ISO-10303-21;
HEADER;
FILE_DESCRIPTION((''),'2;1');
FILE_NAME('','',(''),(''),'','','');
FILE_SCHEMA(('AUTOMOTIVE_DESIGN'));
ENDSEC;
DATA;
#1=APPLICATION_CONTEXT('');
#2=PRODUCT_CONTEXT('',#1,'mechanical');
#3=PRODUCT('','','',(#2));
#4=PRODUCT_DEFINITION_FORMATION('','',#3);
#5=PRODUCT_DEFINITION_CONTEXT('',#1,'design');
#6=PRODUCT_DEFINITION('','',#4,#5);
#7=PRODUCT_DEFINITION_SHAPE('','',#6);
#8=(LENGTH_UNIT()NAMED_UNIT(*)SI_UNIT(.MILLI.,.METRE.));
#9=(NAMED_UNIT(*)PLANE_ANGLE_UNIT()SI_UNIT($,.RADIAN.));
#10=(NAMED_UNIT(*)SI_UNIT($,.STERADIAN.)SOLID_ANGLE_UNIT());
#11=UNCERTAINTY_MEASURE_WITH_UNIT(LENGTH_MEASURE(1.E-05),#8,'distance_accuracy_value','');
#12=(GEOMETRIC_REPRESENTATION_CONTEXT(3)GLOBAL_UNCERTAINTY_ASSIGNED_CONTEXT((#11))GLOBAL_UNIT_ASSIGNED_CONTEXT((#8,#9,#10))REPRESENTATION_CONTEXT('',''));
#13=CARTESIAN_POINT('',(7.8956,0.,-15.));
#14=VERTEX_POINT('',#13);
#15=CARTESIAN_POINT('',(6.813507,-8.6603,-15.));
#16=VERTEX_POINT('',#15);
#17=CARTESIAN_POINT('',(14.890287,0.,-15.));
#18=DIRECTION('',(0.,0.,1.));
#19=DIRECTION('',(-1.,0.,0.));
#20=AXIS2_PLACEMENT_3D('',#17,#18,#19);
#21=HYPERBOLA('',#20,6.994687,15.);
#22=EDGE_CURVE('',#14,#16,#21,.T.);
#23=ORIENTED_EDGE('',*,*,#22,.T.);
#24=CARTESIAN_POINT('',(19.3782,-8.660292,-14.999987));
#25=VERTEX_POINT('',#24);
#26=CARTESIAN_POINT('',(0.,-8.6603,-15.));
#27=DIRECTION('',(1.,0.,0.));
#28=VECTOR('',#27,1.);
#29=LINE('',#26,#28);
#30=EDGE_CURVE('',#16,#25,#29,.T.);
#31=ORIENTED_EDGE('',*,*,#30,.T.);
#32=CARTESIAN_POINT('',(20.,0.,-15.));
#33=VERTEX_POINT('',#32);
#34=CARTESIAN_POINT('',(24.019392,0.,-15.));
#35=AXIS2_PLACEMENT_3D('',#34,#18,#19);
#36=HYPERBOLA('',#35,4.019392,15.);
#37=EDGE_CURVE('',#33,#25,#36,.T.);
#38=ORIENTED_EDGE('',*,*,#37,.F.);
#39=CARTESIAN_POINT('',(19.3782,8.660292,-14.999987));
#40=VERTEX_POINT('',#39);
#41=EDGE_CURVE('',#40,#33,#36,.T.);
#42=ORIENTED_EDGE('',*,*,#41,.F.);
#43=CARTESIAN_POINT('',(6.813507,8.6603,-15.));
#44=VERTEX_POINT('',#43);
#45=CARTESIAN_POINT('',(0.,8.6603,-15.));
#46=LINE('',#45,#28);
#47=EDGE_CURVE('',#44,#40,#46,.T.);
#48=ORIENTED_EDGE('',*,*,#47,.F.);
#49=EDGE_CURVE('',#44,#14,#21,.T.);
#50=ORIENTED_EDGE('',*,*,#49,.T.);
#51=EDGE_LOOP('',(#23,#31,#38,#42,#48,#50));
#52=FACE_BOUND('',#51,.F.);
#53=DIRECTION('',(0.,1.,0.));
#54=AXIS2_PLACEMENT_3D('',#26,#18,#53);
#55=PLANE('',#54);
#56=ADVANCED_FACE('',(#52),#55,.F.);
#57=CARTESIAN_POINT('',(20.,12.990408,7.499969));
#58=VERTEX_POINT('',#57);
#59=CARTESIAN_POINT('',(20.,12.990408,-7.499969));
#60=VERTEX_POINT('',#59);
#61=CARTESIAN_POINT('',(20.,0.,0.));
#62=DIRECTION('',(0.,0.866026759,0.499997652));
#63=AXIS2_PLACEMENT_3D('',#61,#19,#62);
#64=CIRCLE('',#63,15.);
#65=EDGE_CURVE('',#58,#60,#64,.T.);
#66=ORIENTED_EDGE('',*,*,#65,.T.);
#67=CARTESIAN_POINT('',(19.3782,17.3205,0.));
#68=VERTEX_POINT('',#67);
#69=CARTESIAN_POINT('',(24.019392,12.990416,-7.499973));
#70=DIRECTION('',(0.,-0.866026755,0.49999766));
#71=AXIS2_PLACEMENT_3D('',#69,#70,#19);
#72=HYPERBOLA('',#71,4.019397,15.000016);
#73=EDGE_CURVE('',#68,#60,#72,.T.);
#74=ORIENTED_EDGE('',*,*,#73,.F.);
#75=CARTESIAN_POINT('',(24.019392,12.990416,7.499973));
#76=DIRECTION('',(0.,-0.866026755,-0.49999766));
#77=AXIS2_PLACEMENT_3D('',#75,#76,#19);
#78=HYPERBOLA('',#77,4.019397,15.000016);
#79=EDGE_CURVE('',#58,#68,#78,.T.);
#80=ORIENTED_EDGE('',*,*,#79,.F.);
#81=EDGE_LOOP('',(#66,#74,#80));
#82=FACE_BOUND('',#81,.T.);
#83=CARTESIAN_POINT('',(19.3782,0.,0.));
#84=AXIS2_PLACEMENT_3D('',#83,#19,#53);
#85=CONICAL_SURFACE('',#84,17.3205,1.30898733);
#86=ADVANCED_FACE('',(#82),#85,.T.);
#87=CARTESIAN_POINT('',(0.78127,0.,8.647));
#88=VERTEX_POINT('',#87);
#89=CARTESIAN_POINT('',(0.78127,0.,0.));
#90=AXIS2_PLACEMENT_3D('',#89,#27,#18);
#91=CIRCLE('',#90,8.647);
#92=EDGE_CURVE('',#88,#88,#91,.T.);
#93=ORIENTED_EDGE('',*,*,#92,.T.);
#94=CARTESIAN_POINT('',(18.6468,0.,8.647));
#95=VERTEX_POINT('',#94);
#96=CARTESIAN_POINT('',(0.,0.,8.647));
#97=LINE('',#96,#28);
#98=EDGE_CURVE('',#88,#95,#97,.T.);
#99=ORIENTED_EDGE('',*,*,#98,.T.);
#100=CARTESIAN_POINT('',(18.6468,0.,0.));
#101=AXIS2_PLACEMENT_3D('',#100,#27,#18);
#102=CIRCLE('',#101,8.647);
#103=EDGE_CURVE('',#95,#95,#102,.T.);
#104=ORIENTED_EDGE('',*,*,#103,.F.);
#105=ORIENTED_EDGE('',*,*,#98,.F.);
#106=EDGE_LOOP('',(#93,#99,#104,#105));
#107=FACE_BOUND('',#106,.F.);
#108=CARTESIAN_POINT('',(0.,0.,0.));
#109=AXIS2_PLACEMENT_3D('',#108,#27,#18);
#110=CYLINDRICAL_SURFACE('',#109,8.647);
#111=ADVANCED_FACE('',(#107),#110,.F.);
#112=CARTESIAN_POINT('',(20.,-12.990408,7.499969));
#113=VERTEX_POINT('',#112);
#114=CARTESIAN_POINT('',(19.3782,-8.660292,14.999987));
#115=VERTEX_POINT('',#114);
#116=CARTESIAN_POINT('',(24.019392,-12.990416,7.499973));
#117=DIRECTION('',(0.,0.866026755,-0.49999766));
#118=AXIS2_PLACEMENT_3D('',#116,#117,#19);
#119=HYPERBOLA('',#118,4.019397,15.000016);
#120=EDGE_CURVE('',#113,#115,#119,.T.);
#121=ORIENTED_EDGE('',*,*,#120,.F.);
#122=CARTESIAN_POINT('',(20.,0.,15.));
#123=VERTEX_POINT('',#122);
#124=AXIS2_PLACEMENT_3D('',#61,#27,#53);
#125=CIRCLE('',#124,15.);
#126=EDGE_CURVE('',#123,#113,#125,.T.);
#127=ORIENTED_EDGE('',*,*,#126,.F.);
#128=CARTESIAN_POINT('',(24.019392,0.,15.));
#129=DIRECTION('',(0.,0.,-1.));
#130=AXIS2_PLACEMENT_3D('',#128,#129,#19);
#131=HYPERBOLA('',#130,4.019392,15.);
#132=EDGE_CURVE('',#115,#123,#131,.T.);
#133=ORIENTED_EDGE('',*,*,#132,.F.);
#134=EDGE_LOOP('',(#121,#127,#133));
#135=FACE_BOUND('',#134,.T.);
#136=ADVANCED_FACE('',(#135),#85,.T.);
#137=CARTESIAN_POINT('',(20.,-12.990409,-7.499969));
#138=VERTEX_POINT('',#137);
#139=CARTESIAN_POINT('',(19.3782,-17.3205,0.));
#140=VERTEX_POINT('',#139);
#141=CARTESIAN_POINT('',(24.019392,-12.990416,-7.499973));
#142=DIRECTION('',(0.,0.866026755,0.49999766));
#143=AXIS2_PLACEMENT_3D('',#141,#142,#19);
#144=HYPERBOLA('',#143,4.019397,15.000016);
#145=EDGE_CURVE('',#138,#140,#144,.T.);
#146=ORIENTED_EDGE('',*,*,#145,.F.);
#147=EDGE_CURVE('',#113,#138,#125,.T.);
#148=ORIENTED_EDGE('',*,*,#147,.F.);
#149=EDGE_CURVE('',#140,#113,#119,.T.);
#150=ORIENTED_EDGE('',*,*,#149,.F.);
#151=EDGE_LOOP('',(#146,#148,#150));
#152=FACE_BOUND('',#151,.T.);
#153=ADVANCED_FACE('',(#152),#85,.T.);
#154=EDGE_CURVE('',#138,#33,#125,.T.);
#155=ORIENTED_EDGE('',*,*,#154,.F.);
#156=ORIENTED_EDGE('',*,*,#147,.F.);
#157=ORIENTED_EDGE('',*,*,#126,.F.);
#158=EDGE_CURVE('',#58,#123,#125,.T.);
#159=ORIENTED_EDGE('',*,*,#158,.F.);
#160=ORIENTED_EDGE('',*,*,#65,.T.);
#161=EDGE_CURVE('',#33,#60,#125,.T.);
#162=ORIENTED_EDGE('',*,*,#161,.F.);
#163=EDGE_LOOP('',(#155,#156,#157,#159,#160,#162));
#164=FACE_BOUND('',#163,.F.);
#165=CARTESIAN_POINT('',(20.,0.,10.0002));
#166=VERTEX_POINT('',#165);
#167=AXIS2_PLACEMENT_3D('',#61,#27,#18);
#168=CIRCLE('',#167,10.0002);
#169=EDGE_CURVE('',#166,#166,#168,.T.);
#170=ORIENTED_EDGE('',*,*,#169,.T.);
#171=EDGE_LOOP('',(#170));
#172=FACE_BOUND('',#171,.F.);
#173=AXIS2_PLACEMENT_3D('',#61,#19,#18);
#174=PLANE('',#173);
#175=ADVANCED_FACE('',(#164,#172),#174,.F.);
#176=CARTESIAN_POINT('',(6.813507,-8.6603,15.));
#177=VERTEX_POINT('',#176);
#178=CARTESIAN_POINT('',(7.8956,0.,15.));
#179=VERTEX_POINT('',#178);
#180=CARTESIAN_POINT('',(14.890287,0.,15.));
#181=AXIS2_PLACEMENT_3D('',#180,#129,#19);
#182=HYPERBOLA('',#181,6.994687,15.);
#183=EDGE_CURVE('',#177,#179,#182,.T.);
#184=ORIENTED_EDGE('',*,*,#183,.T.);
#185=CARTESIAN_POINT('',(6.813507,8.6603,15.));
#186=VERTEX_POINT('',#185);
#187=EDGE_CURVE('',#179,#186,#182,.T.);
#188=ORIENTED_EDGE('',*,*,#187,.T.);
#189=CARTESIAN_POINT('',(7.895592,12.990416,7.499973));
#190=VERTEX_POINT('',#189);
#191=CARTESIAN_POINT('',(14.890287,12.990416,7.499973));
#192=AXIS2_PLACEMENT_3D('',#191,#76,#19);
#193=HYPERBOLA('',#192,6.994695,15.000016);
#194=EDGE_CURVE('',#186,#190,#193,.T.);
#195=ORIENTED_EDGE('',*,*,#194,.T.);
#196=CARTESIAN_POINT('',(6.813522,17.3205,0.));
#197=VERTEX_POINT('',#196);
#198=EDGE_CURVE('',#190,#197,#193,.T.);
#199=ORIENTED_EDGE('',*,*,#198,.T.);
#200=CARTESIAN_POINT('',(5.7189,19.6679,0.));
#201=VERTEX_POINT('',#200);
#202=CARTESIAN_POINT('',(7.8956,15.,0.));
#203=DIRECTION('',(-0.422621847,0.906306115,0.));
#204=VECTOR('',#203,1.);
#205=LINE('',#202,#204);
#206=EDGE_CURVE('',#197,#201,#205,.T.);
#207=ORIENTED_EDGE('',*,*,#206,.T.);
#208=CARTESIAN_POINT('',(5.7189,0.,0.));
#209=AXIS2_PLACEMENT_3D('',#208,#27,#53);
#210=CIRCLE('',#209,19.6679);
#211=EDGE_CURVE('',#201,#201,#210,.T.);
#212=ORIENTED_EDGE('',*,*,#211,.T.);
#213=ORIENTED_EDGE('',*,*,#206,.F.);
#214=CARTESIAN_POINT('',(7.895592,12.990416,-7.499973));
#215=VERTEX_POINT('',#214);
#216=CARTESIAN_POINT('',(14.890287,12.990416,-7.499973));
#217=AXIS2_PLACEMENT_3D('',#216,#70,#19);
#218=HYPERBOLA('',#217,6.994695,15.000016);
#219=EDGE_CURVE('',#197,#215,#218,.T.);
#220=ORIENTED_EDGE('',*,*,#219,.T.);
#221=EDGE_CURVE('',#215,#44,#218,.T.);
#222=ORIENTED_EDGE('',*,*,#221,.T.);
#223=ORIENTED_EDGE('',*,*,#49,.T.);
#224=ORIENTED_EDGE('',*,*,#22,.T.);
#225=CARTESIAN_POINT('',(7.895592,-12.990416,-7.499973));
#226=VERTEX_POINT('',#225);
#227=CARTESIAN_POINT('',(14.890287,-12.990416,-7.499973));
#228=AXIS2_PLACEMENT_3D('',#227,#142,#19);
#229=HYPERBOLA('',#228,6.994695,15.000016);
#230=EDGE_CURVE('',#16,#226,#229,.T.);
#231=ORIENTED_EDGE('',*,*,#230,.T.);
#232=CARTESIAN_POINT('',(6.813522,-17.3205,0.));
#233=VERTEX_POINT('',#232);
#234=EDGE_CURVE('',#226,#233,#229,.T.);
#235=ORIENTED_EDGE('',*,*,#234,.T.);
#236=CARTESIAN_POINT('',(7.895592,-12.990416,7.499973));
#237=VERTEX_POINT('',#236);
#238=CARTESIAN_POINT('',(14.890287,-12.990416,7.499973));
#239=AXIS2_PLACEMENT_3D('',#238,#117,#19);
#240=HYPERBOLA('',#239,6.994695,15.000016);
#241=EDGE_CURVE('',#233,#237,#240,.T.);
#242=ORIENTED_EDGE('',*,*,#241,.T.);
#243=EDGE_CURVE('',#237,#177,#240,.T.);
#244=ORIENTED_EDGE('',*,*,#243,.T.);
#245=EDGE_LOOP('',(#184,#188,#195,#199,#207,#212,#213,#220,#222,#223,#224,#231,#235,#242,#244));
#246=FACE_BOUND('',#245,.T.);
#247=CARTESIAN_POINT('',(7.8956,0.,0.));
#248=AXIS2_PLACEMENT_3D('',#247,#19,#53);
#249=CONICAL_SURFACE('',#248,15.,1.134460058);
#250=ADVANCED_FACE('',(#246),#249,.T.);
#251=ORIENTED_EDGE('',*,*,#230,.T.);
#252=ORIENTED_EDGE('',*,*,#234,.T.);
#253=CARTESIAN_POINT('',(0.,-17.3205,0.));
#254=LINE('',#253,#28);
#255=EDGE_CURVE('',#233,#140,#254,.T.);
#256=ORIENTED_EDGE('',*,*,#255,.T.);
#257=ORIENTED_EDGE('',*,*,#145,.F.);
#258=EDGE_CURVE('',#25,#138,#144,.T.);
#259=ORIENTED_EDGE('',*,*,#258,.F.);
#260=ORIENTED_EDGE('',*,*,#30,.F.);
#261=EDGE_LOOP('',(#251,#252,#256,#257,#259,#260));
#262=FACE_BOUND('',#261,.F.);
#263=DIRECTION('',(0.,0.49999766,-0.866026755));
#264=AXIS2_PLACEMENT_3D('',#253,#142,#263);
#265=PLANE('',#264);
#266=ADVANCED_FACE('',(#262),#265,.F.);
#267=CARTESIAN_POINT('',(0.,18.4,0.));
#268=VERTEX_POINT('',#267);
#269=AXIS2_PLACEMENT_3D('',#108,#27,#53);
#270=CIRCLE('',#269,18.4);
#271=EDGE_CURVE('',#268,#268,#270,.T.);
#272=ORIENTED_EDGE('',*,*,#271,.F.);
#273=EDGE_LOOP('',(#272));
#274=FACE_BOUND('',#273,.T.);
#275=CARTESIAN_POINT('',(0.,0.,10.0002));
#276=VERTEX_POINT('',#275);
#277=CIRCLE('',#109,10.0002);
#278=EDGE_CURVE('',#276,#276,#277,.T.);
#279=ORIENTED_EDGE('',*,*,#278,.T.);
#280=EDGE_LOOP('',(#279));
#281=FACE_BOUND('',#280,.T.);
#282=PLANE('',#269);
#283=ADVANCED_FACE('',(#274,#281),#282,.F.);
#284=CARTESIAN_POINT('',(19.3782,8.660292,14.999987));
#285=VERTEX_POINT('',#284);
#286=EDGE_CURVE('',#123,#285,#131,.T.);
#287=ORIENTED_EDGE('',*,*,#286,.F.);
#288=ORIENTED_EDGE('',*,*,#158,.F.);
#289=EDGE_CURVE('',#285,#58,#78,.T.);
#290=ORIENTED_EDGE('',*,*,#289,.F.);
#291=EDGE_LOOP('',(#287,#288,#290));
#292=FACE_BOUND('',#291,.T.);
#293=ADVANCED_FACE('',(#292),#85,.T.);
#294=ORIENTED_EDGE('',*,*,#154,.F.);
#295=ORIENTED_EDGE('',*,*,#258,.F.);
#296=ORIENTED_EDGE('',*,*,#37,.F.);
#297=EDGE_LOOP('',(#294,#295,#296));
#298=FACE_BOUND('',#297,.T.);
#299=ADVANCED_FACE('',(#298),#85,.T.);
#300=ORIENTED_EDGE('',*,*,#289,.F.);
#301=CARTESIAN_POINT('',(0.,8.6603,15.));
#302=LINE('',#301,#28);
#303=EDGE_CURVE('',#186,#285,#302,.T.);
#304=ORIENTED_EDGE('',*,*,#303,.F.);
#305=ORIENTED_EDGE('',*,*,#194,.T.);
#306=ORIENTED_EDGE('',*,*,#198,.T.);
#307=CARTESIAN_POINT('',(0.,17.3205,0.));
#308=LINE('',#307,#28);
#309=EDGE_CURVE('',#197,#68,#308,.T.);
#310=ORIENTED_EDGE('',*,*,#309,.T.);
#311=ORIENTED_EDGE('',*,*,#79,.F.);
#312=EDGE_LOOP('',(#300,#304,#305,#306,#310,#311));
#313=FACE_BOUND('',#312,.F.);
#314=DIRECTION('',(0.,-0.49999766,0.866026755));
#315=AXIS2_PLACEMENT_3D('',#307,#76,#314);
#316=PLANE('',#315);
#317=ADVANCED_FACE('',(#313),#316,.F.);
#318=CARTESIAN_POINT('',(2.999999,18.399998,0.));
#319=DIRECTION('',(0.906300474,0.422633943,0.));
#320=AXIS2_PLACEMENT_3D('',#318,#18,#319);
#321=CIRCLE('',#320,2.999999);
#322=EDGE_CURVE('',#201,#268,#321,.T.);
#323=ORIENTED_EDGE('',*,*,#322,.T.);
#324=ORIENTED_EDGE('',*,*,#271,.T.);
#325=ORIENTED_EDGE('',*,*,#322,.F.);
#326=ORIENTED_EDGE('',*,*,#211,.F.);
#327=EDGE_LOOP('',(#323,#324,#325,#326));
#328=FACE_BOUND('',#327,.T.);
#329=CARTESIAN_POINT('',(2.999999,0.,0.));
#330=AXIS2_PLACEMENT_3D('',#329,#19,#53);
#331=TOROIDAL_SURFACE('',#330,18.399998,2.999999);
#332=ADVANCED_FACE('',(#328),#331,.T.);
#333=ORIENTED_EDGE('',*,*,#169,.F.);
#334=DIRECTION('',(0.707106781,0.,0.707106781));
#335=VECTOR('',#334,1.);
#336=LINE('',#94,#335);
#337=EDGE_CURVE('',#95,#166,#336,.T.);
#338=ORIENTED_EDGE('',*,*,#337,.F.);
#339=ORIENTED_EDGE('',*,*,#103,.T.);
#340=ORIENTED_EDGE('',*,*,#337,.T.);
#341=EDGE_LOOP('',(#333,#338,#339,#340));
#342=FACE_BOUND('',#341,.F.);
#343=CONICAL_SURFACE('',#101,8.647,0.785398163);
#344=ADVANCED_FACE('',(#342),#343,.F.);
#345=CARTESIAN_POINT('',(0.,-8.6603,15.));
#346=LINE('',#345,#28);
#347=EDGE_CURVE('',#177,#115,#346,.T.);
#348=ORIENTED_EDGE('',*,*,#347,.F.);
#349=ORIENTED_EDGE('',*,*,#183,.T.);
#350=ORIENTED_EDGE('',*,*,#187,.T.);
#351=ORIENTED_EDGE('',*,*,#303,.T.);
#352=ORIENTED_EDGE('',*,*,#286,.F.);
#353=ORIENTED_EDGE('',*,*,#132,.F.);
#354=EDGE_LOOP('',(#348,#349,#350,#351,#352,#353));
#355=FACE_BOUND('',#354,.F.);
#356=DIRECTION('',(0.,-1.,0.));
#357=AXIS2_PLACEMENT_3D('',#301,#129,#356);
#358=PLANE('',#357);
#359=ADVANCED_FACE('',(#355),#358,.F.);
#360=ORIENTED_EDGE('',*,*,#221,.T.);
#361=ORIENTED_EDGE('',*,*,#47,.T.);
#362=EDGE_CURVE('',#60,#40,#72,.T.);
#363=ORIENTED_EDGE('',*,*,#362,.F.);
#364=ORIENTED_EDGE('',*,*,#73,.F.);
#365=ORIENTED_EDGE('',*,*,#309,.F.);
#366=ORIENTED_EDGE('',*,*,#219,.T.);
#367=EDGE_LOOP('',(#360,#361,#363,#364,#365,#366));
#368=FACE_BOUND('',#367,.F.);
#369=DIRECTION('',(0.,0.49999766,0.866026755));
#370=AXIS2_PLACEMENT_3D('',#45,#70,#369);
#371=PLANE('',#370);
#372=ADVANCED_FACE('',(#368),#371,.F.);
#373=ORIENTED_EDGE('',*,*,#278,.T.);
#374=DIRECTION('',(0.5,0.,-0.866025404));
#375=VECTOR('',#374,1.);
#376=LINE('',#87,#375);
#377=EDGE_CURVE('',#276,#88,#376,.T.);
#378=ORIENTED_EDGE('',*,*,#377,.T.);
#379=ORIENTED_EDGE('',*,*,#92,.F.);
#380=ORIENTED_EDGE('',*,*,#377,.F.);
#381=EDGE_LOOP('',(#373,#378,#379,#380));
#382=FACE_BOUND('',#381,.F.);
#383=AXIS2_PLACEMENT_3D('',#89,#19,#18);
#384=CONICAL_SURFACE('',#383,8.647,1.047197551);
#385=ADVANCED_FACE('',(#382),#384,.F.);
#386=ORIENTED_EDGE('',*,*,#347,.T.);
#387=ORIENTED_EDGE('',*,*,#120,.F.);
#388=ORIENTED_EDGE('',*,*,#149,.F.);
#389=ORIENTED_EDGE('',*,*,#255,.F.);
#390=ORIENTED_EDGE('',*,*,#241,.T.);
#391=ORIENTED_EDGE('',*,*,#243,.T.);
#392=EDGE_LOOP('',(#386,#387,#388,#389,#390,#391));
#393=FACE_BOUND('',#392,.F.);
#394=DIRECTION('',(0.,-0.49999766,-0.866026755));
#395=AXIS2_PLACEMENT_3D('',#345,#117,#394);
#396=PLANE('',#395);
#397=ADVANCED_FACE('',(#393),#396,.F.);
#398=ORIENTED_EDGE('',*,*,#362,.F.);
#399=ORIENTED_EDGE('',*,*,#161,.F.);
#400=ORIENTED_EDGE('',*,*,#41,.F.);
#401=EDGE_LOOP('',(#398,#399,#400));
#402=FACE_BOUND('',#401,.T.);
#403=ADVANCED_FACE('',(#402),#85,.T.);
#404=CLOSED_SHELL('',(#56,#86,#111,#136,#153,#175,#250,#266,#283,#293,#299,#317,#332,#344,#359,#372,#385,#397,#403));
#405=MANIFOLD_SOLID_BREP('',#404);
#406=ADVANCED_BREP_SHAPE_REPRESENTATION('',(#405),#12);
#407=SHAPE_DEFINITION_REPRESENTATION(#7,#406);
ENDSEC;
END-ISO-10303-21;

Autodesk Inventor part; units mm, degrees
ref_plane "YZ Plane" through (0, 0, 0) normal (1, 0, 0) x (0, 1, 0)
ref_plane "XZ Plane" through (0, 0, 0) normal (0, 1, 0) x (-1, 0, 0)
sketch "Эскиз1" plane through (0, 0, 0) normal (0, 0, 1) x (1, 0, 0)
  line L0 (-4.6105, 0) -> (24.1018, 0) projected
  line L1 (7.8956, 15) -> (5.7189, 19.6679)
  line L2 (7.8956, 15) -> (20, 15) construction
  line L3 (20, 15) -> (20, 0) construction
  arc A0 (5.7189, 19.6679) -> (0, 18.4) centre (3, 18.4) ccw
  line L4 (7.8956, 15) -> (7.8956, 0)
  line L5 (0, -4.3926) -> (0, 26.3554) projected
  point P0 (0, 0)
  dimension "d2" = 30
  dimension "d4" = 42.8
  dimension "d5" = 3
  dimension "d15" = 20
  dimension "d16" = 25
revolve "Кольцо" add sketch "Эскиз1" angle 360 about axis through (-10, 0, 0) along (1, 0, 0)
sketch "Эскиз2" plane through (0, 0, 0) normal (-1, 0, 0) x (0, 0, 1)
  circle A0 centre (0, 0) radius 4.9
  line L0 (-15, -8.6603) -> (-15, 8.6603)
  line L1 (-15, 8.6603) -> (0, 17.3205)
  line L2 (0, 17.3205) -> (15, 8.6603)
  line L3 (15, 8.6603) -> (15, -8.6603)
  line L4 (15, -8.6603) -> (0, -17.3205)
  line L5 (0, -17.3205) -> (-15, -8.6603)
  circle A1 centre (0, 0) radius 18.4 projected
  dimension "d6" = 34.641
extrude "Базовый элемент" add sketch "Эскиз2" against normal blind 20 contours A0 | L0 L1 L2 L3 L4 L5
sketch "Эскиз3" plane through (0, 0, 0) normal (0, 0, 1) x (1, 0, 0)
  line L0 (6.8135, 17.3205) -> (20, 17.3205) projected
  line L1 (20, 8.6603) -> (20, 17.3205) projected
  line L2 (0, -18.4) -> (0, 18.4) projected
  line L3 (-4, 0) -> (24, 0) projected
  line L4 (19.3782, 17.3205) -> (20, 15)
  dimension "d10" = 15
  dimension "d11" = 30
revolve "Фаска1" cut sketch "Эскиз3" angle 360 about axis through (-10, 0, 0) along (1, 0, 0)
sketch "Эскиз4" plane through (0, 0, 0) normal (-1, 0, 0) x (0, 0, 1)
  circle A0 centre (0, 0) radius 18.4 projected
hole "Резьба" at (0, 0, 0) direction (1, 0, 0) diameter 17.294 end through all thread size "M20x2.5" class "6H" standard "ISO Metric profile"
chamfer "Фаска2" distance 1.3532 angle 30 1 edges at (0, 0, -8.647) measured on face at (0, 14.9498, -1.8152)
ref_plane "Work Plane1" through (63.747, 0, 0) normal (0, 0, -1) x (-1, 0, 0)
chamfer "Фаска3" distance 1.3532 angle 45 1 edges at (20, 0, -8.647)
equation "\"d6\" = 1.1547 * SW"
equation "\"d7\" = KOH"
equation "\"d12\" = -0.5 * GD1 + 0.5 * NND"
equation "\"d46\" = -0.5 * GD1 + 0.5 * NND"
equation "\"d51\" = -0.5 * GD1 + 0.5 * NND"
equation "\"d2\" = SW"
equation "\"d4\" = LADI"
equation "\"d5\" = PHH"
equation "\"d15\" = KOH"
equation "\"d16\" = KEWI"
equation "\"d10\" = ANG1"
equation "\"d11\" = SW0"
equation "\"ANG1\" = 15deg"
equation "\"KEWI\" = 25deg"
equation "\"LADI\" = 42.8"
equation "\"SW\" = 30"
equation "\"PHH\" = RR"
equation "\"KOH\" = NND"
equation "\"SW0\" = SW"
equation "\"d1\" = LADI"
equation "\"d3\" = PHH"
equation "\"GUL\" = 0.541266 * PTC"
equation "\"RR\" = 3"
equation "\"TOA\" = 30deg"
equation "\"PTC\" = 2.5"
equation "\"GAL\" = 0.541266 * PTC"
equation "\"E0\" = 1.155 * SW"
equation "\"GD1\" = 17.293671"
equation "\"NND\" = 20"
properties part number "DIN 6923 - M20" material "Сталь, мягкая"
